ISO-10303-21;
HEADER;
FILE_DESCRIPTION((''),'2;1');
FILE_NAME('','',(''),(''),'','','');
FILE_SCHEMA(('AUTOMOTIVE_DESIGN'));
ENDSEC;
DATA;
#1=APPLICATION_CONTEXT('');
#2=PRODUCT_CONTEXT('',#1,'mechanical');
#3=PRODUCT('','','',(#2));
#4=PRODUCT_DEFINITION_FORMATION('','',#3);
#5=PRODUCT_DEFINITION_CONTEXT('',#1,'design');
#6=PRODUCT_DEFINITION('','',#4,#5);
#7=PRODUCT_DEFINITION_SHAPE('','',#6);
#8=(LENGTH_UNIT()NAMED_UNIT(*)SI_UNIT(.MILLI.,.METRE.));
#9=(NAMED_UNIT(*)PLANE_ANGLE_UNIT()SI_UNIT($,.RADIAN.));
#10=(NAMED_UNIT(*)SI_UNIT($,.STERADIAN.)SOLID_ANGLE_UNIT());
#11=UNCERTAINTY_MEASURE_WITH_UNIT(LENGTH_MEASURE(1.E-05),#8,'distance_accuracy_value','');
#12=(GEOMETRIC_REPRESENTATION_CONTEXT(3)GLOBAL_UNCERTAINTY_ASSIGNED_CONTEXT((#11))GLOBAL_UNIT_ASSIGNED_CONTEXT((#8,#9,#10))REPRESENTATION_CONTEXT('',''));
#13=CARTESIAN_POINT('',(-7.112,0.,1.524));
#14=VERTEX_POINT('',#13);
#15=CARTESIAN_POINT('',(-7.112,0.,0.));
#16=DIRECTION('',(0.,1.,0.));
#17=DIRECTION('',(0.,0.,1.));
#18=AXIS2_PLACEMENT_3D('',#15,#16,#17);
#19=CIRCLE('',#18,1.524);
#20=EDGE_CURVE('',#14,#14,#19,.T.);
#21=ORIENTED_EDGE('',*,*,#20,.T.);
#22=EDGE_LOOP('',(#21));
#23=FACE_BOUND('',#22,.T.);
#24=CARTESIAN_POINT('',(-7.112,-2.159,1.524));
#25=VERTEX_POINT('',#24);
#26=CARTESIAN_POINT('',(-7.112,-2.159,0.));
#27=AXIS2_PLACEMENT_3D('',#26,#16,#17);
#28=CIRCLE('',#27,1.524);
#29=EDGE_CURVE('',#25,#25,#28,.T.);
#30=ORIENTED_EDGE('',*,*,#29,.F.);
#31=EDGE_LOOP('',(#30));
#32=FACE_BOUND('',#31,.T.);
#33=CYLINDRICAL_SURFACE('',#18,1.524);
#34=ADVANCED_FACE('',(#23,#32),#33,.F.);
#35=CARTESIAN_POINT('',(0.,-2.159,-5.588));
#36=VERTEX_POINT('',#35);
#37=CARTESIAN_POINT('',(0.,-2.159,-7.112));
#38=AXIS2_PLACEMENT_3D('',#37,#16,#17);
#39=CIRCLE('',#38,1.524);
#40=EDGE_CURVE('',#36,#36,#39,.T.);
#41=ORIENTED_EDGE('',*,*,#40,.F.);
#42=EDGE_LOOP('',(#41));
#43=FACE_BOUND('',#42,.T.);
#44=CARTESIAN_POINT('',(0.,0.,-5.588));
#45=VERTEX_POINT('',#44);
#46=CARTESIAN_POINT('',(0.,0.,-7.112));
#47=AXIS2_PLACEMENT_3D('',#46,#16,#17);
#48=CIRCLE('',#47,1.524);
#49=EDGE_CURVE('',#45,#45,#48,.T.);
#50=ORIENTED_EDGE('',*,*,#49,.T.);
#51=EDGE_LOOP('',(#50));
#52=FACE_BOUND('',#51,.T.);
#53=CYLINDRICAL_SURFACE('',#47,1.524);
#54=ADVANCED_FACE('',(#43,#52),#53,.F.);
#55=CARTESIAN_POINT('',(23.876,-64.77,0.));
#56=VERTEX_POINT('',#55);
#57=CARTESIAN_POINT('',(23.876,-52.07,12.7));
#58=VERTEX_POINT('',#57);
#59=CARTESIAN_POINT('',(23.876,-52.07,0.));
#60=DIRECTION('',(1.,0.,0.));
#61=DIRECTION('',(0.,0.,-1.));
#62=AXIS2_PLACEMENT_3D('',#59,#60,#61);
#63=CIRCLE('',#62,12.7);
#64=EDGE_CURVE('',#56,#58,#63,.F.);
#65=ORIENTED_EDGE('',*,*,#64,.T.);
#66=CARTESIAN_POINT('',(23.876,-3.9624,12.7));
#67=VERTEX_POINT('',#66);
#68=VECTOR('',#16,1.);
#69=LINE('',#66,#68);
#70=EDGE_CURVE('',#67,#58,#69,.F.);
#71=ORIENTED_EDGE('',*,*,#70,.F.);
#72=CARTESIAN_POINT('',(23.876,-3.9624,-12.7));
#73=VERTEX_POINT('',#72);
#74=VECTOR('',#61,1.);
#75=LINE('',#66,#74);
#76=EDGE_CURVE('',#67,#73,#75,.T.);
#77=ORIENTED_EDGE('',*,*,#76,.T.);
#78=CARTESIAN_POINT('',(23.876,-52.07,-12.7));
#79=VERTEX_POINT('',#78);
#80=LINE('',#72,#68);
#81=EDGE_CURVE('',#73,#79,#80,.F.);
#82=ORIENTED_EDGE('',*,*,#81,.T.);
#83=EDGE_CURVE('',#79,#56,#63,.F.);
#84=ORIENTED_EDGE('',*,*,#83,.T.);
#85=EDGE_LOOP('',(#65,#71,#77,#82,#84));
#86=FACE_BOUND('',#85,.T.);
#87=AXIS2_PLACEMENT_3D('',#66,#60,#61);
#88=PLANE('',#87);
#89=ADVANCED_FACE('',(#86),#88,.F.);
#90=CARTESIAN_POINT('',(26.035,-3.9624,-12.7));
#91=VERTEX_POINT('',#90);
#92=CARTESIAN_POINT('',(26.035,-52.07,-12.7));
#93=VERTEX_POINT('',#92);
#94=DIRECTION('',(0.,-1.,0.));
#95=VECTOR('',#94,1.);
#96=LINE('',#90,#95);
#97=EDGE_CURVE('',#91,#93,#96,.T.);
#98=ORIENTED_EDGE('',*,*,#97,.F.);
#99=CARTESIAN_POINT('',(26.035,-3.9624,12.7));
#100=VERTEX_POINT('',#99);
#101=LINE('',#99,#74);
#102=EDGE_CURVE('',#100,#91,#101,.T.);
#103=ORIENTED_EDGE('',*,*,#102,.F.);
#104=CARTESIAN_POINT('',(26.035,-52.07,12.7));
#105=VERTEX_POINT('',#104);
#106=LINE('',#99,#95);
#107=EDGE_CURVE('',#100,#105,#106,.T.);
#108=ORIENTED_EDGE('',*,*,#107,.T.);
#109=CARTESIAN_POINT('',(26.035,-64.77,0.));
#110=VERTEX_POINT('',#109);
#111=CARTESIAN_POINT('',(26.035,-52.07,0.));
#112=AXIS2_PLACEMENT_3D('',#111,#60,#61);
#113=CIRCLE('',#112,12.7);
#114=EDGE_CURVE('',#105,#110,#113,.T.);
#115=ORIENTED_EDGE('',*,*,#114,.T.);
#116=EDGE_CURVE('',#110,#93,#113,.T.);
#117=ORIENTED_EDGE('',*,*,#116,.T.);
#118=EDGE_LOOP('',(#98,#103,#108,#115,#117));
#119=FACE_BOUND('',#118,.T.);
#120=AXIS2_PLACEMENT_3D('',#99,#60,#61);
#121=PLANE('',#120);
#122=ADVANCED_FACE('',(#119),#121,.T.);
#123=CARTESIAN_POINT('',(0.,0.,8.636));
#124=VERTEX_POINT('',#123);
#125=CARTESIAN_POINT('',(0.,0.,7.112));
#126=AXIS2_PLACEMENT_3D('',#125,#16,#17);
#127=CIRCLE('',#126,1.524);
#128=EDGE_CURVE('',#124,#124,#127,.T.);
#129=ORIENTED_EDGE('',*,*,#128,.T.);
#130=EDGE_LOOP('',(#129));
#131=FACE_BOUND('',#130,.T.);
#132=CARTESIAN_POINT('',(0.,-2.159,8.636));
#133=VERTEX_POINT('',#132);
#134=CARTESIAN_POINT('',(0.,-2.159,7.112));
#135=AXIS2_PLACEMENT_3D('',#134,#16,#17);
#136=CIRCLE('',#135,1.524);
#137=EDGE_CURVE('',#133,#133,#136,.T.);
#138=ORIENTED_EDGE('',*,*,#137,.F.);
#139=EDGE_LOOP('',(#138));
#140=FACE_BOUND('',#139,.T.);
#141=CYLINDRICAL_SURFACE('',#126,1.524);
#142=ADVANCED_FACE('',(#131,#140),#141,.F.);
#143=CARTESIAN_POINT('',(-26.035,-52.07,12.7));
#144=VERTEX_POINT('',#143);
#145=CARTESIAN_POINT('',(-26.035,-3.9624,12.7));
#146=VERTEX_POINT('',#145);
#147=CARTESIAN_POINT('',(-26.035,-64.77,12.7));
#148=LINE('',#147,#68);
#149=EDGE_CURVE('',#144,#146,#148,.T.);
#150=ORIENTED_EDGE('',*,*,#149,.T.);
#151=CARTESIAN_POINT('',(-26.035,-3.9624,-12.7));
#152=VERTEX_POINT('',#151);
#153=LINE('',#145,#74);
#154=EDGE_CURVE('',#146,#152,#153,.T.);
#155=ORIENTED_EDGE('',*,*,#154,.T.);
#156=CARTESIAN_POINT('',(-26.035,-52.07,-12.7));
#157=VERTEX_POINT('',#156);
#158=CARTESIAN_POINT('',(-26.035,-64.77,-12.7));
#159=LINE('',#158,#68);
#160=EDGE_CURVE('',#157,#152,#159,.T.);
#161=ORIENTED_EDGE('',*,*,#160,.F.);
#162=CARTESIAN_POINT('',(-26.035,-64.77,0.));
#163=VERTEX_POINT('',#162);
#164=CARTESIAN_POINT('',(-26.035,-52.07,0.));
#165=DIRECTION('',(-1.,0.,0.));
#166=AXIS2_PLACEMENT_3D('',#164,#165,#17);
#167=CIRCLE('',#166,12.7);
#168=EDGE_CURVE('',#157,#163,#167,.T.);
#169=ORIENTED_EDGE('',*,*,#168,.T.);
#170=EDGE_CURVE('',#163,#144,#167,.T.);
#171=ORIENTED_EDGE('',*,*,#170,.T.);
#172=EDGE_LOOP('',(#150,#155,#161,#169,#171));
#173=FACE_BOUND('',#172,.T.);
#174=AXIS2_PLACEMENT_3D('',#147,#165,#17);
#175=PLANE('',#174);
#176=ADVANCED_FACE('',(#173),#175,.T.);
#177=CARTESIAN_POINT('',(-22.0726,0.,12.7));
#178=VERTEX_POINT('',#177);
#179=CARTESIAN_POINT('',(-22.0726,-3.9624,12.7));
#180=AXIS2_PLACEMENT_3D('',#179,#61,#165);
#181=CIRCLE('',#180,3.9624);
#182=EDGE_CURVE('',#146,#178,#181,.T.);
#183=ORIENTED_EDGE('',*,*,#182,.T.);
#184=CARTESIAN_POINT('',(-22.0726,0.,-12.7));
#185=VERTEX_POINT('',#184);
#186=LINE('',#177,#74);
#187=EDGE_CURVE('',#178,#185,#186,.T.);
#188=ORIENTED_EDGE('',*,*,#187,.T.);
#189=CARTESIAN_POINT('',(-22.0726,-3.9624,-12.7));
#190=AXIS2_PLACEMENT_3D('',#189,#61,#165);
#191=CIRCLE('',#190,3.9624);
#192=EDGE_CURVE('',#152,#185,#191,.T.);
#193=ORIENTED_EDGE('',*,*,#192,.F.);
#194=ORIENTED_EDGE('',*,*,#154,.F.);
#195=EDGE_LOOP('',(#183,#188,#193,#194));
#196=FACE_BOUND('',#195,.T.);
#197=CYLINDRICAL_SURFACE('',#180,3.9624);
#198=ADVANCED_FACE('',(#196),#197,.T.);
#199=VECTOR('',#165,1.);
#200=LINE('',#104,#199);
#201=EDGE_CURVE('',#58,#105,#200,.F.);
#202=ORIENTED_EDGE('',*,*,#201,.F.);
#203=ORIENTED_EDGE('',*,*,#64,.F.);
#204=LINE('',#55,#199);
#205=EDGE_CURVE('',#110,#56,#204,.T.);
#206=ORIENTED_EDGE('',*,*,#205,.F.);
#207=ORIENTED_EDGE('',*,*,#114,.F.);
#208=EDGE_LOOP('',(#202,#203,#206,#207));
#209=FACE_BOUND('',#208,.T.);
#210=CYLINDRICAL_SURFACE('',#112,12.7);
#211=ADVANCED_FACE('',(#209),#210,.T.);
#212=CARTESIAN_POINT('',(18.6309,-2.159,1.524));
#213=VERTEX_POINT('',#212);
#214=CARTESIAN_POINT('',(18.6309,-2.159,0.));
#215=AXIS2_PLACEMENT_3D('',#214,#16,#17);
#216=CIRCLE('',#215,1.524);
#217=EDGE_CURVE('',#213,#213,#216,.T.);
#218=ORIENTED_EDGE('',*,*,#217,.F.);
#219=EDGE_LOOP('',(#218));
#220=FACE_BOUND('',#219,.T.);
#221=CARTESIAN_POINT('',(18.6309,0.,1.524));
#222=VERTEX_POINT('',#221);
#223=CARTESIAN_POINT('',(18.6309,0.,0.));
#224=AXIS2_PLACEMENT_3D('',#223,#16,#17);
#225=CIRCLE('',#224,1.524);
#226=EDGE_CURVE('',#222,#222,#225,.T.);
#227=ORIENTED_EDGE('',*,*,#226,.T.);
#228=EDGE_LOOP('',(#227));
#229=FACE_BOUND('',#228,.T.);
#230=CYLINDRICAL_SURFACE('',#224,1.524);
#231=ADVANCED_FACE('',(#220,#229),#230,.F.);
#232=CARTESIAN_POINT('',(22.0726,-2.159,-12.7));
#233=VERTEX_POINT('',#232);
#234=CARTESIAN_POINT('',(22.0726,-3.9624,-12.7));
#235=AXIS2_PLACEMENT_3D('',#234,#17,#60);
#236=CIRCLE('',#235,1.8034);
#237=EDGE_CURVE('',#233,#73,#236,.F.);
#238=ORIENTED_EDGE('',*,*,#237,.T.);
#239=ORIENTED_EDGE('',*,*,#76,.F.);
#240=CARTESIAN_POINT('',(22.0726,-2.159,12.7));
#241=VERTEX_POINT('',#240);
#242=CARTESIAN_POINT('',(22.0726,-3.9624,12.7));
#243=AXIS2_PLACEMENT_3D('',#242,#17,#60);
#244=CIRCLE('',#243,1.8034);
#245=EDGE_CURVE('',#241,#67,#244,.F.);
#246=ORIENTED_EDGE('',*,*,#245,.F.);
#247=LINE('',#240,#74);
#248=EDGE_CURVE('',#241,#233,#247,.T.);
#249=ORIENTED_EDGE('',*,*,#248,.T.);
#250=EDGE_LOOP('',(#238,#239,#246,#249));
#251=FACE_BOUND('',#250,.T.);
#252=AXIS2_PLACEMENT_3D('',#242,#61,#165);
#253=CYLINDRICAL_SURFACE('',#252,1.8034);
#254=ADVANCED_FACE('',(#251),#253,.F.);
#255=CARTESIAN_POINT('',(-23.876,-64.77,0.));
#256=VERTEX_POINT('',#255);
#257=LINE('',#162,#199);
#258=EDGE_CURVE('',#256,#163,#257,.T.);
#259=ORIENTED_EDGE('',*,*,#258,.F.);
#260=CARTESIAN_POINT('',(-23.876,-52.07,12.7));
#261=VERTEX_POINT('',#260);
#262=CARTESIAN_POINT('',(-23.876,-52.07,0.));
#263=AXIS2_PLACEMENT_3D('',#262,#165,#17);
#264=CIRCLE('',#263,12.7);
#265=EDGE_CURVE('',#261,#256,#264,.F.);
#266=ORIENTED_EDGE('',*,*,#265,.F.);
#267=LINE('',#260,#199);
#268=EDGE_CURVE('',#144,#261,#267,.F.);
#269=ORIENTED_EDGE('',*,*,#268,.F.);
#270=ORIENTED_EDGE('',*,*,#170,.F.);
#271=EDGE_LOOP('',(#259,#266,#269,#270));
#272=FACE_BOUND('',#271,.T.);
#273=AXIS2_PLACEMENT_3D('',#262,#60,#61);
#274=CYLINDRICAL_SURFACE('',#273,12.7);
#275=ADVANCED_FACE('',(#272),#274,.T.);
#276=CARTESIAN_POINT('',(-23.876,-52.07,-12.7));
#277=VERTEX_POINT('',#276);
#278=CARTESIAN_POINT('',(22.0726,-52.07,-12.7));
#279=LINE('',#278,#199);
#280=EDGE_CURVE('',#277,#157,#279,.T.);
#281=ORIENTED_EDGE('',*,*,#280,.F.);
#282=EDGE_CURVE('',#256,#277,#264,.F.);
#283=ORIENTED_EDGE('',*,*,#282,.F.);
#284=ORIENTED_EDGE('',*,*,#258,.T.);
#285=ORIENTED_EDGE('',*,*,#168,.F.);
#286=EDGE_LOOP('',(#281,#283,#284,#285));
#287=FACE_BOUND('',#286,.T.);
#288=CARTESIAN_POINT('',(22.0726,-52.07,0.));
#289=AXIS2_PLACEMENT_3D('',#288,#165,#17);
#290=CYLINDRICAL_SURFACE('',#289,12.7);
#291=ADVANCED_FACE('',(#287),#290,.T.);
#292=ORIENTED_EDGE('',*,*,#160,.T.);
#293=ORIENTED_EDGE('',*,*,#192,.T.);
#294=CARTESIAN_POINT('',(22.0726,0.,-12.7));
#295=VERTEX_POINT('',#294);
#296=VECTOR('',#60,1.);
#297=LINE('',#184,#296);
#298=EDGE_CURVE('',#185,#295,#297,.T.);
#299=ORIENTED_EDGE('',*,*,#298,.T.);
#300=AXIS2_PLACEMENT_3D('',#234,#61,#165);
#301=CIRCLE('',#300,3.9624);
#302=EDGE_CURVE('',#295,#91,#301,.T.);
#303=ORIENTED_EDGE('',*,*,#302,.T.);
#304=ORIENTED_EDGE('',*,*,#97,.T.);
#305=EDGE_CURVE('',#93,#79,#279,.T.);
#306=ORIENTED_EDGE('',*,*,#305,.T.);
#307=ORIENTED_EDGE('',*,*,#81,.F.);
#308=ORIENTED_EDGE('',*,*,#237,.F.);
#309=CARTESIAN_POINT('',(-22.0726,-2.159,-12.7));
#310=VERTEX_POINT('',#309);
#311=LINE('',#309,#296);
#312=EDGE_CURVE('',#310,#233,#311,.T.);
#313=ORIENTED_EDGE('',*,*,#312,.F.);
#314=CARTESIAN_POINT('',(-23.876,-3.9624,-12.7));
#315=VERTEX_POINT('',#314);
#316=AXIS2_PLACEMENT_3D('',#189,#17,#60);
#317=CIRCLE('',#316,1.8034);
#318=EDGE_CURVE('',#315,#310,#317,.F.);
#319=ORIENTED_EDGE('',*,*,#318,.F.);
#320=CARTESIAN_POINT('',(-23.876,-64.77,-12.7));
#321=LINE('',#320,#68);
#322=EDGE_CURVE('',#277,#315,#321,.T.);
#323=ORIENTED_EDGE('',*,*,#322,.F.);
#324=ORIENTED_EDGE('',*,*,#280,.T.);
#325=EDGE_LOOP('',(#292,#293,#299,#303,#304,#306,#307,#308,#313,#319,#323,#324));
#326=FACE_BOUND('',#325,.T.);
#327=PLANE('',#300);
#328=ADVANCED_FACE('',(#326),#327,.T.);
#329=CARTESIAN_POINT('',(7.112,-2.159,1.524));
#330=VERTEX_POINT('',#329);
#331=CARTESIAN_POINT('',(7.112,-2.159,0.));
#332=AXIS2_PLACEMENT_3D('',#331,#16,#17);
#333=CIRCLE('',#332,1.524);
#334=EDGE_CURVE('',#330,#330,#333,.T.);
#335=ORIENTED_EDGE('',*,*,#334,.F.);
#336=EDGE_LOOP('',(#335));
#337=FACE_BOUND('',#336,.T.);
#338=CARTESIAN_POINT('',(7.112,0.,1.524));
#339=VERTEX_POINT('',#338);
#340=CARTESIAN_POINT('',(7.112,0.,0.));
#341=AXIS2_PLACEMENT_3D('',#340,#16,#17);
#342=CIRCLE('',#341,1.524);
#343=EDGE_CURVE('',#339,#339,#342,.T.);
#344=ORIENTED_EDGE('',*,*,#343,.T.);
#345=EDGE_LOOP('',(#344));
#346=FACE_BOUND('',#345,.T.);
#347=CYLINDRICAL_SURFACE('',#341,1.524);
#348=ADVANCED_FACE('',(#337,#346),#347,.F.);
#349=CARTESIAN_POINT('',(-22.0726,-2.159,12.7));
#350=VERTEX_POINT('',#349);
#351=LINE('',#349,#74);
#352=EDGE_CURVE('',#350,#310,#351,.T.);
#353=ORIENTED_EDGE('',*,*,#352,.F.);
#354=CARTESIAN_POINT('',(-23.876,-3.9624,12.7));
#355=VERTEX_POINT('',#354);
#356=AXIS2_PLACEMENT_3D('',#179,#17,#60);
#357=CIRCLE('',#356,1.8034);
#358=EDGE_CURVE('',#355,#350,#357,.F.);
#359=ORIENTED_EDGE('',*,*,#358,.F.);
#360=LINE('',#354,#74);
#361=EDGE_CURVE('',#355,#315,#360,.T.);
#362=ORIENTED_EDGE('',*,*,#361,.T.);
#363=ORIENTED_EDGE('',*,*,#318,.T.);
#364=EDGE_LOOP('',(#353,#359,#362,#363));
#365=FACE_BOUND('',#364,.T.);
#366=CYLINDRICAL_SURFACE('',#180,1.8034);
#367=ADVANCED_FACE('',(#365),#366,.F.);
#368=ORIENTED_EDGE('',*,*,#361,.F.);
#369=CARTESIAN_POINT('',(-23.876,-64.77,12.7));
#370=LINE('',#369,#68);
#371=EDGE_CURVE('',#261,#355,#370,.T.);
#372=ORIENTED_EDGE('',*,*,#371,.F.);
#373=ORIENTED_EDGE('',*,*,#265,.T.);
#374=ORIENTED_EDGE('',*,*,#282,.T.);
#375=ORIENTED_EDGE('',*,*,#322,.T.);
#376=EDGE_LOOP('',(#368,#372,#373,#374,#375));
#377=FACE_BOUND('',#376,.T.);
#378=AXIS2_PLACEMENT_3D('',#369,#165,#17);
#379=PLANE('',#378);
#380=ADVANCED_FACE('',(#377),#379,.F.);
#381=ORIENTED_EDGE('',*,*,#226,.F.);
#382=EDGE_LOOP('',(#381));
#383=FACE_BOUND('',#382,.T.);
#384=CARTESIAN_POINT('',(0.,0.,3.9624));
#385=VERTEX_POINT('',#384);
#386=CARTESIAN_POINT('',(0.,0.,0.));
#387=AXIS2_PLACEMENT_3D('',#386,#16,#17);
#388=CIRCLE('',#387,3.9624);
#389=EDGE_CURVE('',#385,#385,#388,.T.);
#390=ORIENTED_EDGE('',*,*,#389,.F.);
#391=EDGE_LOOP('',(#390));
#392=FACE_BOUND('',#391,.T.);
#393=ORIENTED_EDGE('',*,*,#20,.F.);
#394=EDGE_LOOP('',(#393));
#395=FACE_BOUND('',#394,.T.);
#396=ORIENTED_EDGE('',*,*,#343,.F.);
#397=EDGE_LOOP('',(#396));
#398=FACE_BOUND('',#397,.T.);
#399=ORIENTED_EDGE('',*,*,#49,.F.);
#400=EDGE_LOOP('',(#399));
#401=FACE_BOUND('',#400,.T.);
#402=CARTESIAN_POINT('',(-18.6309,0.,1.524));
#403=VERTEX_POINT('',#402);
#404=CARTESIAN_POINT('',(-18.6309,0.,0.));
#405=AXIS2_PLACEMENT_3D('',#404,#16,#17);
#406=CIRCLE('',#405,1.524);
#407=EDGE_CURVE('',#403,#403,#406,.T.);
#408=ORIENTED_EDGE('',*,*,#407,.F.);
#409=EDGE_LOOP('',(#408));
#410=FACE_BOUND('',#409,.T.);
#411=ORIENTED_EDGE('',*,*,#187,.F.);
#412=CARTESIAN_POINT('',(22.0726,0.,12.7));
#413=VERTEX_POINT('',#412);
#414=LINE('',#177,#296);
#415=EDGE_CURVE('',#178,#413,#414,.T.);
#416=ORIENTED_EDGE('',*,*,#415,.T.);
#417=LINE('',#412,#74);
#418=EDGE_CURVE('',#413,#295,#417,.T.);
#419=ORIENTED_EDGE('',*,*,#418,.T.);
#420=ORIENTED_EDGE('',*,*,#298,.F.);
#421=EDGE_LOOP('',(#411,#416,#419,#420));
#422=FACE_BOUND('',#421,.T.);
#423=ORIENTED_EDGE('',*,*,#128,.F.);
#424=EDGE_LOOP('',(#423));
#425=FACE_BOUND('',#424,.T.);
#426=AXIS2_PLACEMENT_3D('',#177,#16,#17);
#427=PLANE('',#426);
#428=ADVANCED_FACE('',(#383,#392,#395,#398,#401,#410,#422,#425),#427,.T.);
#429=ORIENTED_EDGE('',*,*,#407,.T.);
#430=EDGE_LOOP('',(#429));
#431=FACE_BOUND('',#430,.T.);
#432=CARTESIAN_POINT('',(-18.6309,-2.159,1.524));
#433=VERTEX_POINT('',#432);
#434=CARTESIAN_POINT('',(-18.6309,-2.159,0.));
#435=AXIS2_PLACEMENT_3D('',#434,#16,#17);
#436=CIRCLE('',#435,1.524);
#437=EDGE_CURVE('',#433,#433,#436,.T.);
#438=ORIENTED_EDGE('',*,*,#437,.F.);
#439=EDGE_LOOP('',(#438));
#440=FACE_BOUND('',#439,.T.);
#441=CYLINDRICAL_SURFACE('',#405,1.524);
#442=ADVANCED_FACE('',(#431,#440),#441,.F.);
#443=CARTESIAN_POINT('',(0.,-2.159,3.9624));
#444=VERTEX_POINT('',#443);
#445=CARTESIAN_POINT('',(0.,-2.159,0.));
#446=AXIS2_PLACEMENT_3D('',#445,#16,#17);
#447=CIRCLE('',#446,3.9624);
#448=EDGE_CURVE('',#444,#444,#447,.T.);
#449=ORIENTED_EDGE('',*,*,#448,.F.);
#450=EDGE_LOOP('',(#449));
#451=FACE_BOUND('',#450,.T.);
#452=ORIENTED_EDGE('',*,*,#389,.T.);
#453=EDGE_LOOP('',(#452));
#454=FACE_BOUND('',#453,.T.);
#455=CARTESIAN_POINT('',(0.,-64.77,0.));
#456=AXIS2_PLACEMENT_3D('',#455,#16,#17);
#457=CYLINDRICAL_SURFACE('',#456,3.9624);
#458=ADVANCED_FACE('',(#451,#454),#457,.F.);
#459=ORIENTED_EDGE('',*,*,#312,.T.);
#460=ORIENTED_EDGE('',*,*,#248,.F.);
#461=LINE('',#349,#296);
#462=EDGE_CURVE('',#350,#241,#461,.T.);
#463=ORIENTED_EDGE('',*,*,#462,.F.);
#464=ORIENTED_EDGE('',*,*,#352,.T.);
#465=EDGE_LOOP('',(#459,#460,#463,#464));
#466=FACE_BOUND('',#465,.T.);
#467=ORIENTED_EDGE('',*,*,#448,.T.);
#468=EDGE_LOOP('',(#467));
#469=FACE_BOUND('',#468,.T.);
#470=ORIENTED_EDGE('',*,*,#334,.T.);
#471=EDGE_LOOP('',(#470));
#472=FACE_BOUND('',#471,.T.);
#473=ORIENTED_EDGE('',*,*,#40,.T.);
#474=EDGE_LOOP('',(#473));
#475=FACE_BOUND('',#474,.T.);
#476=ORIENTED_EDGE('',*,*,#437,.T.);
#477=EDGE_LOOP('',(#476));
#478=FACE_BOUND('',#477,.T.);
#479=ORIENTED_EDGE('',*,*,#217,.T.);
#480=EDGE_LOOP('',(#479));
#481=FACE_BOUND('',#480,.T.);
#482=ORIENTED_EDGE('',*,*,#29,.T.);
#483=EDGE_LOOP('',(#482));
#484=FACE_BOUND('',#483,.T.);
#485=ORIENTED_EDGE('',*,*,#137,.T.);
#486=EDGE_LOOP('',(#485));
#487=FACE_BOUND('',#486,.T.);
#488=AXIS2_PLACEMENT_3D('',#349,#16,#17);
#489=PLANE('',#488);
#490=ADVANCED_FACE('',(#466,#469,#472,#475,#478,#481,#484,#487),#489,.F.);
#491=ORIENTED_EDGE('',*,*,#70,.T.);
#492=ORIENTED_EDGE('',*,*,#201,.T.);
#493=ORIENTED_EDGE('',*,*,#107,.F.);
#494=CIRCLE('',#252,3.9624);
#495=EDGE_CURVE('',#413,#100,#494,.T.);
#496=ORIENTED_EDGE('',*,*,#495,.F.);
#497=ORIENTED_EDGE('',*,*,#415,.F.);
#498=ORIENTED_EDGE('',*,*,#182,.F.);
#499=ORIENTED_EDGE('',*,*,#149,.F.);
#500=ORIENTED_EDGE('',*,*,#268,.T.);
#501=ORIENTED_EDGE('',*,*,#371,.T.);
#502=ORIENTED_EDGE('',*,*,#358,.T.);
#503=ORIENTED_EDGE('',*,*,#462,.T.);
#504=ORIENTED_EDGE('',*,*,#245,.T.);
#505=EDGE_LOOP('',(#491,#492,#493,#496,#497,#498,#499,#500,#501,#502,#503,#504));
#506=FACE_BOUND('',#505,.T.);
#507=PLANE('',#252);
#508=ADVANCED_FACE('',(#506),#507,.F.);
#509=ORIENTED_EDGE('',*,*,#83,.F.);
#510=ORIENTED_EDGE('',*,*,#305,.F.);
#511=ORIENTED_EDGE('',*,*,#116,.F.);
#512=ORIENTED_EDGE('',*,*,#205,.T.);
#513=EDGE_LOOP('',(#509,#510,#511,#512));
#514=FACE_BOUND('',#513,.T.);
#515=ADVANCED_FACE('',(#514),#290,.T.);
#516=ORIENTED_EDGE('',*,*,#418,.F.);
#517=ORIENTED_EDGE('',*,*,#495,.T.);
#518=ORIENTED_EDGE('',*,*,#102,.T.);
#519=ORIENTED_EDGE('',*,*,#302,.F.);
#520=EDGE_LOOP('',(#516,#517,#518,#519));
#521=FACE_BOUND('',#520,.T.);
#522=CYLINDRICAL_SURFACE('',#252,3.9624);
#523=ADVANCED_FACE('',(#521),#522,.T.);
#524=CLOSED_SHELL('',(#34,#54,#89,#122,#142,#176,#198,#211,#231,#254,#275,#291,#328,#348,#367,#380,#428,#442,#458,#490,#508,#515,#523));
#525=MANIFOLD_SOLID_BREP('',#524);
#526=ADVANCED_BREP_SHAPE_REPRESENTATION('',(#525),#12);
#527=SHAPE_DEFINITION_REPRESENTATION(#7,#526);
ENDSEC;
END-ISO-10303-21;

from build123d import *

# Parameters (mm, degrees)
EXTRUDE_THIN1_DEPTH        = 12.7
FILLET1_R                  = 12.7
SKETCH2_R                  = 3.9624
CUT_EXTRUDE1_DEPTH         = 71.952548404
F_31_0_12_DIAMETER_HOLE1_D = 3.048


with BuildPart() as part:
    # Sketch1 → Extrude-Thin1 (new, symmetric)
    with BuildSketch(Plane.XY):
        with BuildLine():
            Line((-26.035, -64.77), (-26.035, -3.9624))
            ThreePointArc((-26.035, -3.9624), (-24.87443991, -1.16056009), (-22.0726, 0))
            Line((-22.0726, 0), (22.0726, 0))
            ThreePointArc((22.0726, 0), (24.87443991, -1.16056009), (26.035, -3.9624))
            Line((26.035, -3.9624), (26.035, -64.77))
            Line((26.035, -64.77), (23.876, -64.77))
            Line((23.876, -64.77), (23.876, -3.9624))
            ThreePointArc((23.876, -3.9624), (23.347796369, -2.687203631), (22.0726, -2.159))
            Line((22.0726, -2.159), (-22.0726, -2.159))
            ThreePointArc((-22.0726, -2.159), (-23.347796369, -2.687203631), (-23.876, -3.9624))
            Line((-23.876, -3.9624), (-23.876, -64.77))
            Line((-23.876, -64.77), (-26.035, -64.77))
        make_face()
    extrude(amount=EXTRUDE_THIN1_DEPTH, both=True)

    # Fillet1
    fillet1_edges = [part.edges().sort_by_distance(p)[0] for p in [
        (24.9555, -64.77, -12.7),
        (24.9555, -64.77, 12.7),
        (-24.9555, -64.77, -12.7),
        (-24.9555, -64.77, 12.7),
    ]]
    fillet(fillet1_edges, radius=FILLET1_R - 0.0001)  # a hair under: the kernel refuses the full size

    # Sketch2 → Cut-Extrude1 (cut, through all)
    with BuildSketch(Plane(origin=(0, 0, 0), x_dir=(1, 0, 0), z_dir=(0, 1, 0))):
        with Locations(Location((0, 0, 0), (0, 0, 270))):
            Circle(SKETCH2_R)
    extrude(amount=-CUT_EXTRUDE1_DEPTH, mode=Mode.SUBTRACT)

    # #31 (0.12) Diameter Hole1 (through all)
    with Locations(Plane(origin=(0, 0, 0), x_dir=(1, 0, 0), z_dir=(0, 1, 0))):
        with Locations((0, -7.112), (0, 7.112), (-7.112, 0), (7.112, 0), (18.6309, 0), (-18.6309, 0)):
            Hole(F_31_0_12_DIAMETER_HOLE1_D / 2)


solid = part.part
